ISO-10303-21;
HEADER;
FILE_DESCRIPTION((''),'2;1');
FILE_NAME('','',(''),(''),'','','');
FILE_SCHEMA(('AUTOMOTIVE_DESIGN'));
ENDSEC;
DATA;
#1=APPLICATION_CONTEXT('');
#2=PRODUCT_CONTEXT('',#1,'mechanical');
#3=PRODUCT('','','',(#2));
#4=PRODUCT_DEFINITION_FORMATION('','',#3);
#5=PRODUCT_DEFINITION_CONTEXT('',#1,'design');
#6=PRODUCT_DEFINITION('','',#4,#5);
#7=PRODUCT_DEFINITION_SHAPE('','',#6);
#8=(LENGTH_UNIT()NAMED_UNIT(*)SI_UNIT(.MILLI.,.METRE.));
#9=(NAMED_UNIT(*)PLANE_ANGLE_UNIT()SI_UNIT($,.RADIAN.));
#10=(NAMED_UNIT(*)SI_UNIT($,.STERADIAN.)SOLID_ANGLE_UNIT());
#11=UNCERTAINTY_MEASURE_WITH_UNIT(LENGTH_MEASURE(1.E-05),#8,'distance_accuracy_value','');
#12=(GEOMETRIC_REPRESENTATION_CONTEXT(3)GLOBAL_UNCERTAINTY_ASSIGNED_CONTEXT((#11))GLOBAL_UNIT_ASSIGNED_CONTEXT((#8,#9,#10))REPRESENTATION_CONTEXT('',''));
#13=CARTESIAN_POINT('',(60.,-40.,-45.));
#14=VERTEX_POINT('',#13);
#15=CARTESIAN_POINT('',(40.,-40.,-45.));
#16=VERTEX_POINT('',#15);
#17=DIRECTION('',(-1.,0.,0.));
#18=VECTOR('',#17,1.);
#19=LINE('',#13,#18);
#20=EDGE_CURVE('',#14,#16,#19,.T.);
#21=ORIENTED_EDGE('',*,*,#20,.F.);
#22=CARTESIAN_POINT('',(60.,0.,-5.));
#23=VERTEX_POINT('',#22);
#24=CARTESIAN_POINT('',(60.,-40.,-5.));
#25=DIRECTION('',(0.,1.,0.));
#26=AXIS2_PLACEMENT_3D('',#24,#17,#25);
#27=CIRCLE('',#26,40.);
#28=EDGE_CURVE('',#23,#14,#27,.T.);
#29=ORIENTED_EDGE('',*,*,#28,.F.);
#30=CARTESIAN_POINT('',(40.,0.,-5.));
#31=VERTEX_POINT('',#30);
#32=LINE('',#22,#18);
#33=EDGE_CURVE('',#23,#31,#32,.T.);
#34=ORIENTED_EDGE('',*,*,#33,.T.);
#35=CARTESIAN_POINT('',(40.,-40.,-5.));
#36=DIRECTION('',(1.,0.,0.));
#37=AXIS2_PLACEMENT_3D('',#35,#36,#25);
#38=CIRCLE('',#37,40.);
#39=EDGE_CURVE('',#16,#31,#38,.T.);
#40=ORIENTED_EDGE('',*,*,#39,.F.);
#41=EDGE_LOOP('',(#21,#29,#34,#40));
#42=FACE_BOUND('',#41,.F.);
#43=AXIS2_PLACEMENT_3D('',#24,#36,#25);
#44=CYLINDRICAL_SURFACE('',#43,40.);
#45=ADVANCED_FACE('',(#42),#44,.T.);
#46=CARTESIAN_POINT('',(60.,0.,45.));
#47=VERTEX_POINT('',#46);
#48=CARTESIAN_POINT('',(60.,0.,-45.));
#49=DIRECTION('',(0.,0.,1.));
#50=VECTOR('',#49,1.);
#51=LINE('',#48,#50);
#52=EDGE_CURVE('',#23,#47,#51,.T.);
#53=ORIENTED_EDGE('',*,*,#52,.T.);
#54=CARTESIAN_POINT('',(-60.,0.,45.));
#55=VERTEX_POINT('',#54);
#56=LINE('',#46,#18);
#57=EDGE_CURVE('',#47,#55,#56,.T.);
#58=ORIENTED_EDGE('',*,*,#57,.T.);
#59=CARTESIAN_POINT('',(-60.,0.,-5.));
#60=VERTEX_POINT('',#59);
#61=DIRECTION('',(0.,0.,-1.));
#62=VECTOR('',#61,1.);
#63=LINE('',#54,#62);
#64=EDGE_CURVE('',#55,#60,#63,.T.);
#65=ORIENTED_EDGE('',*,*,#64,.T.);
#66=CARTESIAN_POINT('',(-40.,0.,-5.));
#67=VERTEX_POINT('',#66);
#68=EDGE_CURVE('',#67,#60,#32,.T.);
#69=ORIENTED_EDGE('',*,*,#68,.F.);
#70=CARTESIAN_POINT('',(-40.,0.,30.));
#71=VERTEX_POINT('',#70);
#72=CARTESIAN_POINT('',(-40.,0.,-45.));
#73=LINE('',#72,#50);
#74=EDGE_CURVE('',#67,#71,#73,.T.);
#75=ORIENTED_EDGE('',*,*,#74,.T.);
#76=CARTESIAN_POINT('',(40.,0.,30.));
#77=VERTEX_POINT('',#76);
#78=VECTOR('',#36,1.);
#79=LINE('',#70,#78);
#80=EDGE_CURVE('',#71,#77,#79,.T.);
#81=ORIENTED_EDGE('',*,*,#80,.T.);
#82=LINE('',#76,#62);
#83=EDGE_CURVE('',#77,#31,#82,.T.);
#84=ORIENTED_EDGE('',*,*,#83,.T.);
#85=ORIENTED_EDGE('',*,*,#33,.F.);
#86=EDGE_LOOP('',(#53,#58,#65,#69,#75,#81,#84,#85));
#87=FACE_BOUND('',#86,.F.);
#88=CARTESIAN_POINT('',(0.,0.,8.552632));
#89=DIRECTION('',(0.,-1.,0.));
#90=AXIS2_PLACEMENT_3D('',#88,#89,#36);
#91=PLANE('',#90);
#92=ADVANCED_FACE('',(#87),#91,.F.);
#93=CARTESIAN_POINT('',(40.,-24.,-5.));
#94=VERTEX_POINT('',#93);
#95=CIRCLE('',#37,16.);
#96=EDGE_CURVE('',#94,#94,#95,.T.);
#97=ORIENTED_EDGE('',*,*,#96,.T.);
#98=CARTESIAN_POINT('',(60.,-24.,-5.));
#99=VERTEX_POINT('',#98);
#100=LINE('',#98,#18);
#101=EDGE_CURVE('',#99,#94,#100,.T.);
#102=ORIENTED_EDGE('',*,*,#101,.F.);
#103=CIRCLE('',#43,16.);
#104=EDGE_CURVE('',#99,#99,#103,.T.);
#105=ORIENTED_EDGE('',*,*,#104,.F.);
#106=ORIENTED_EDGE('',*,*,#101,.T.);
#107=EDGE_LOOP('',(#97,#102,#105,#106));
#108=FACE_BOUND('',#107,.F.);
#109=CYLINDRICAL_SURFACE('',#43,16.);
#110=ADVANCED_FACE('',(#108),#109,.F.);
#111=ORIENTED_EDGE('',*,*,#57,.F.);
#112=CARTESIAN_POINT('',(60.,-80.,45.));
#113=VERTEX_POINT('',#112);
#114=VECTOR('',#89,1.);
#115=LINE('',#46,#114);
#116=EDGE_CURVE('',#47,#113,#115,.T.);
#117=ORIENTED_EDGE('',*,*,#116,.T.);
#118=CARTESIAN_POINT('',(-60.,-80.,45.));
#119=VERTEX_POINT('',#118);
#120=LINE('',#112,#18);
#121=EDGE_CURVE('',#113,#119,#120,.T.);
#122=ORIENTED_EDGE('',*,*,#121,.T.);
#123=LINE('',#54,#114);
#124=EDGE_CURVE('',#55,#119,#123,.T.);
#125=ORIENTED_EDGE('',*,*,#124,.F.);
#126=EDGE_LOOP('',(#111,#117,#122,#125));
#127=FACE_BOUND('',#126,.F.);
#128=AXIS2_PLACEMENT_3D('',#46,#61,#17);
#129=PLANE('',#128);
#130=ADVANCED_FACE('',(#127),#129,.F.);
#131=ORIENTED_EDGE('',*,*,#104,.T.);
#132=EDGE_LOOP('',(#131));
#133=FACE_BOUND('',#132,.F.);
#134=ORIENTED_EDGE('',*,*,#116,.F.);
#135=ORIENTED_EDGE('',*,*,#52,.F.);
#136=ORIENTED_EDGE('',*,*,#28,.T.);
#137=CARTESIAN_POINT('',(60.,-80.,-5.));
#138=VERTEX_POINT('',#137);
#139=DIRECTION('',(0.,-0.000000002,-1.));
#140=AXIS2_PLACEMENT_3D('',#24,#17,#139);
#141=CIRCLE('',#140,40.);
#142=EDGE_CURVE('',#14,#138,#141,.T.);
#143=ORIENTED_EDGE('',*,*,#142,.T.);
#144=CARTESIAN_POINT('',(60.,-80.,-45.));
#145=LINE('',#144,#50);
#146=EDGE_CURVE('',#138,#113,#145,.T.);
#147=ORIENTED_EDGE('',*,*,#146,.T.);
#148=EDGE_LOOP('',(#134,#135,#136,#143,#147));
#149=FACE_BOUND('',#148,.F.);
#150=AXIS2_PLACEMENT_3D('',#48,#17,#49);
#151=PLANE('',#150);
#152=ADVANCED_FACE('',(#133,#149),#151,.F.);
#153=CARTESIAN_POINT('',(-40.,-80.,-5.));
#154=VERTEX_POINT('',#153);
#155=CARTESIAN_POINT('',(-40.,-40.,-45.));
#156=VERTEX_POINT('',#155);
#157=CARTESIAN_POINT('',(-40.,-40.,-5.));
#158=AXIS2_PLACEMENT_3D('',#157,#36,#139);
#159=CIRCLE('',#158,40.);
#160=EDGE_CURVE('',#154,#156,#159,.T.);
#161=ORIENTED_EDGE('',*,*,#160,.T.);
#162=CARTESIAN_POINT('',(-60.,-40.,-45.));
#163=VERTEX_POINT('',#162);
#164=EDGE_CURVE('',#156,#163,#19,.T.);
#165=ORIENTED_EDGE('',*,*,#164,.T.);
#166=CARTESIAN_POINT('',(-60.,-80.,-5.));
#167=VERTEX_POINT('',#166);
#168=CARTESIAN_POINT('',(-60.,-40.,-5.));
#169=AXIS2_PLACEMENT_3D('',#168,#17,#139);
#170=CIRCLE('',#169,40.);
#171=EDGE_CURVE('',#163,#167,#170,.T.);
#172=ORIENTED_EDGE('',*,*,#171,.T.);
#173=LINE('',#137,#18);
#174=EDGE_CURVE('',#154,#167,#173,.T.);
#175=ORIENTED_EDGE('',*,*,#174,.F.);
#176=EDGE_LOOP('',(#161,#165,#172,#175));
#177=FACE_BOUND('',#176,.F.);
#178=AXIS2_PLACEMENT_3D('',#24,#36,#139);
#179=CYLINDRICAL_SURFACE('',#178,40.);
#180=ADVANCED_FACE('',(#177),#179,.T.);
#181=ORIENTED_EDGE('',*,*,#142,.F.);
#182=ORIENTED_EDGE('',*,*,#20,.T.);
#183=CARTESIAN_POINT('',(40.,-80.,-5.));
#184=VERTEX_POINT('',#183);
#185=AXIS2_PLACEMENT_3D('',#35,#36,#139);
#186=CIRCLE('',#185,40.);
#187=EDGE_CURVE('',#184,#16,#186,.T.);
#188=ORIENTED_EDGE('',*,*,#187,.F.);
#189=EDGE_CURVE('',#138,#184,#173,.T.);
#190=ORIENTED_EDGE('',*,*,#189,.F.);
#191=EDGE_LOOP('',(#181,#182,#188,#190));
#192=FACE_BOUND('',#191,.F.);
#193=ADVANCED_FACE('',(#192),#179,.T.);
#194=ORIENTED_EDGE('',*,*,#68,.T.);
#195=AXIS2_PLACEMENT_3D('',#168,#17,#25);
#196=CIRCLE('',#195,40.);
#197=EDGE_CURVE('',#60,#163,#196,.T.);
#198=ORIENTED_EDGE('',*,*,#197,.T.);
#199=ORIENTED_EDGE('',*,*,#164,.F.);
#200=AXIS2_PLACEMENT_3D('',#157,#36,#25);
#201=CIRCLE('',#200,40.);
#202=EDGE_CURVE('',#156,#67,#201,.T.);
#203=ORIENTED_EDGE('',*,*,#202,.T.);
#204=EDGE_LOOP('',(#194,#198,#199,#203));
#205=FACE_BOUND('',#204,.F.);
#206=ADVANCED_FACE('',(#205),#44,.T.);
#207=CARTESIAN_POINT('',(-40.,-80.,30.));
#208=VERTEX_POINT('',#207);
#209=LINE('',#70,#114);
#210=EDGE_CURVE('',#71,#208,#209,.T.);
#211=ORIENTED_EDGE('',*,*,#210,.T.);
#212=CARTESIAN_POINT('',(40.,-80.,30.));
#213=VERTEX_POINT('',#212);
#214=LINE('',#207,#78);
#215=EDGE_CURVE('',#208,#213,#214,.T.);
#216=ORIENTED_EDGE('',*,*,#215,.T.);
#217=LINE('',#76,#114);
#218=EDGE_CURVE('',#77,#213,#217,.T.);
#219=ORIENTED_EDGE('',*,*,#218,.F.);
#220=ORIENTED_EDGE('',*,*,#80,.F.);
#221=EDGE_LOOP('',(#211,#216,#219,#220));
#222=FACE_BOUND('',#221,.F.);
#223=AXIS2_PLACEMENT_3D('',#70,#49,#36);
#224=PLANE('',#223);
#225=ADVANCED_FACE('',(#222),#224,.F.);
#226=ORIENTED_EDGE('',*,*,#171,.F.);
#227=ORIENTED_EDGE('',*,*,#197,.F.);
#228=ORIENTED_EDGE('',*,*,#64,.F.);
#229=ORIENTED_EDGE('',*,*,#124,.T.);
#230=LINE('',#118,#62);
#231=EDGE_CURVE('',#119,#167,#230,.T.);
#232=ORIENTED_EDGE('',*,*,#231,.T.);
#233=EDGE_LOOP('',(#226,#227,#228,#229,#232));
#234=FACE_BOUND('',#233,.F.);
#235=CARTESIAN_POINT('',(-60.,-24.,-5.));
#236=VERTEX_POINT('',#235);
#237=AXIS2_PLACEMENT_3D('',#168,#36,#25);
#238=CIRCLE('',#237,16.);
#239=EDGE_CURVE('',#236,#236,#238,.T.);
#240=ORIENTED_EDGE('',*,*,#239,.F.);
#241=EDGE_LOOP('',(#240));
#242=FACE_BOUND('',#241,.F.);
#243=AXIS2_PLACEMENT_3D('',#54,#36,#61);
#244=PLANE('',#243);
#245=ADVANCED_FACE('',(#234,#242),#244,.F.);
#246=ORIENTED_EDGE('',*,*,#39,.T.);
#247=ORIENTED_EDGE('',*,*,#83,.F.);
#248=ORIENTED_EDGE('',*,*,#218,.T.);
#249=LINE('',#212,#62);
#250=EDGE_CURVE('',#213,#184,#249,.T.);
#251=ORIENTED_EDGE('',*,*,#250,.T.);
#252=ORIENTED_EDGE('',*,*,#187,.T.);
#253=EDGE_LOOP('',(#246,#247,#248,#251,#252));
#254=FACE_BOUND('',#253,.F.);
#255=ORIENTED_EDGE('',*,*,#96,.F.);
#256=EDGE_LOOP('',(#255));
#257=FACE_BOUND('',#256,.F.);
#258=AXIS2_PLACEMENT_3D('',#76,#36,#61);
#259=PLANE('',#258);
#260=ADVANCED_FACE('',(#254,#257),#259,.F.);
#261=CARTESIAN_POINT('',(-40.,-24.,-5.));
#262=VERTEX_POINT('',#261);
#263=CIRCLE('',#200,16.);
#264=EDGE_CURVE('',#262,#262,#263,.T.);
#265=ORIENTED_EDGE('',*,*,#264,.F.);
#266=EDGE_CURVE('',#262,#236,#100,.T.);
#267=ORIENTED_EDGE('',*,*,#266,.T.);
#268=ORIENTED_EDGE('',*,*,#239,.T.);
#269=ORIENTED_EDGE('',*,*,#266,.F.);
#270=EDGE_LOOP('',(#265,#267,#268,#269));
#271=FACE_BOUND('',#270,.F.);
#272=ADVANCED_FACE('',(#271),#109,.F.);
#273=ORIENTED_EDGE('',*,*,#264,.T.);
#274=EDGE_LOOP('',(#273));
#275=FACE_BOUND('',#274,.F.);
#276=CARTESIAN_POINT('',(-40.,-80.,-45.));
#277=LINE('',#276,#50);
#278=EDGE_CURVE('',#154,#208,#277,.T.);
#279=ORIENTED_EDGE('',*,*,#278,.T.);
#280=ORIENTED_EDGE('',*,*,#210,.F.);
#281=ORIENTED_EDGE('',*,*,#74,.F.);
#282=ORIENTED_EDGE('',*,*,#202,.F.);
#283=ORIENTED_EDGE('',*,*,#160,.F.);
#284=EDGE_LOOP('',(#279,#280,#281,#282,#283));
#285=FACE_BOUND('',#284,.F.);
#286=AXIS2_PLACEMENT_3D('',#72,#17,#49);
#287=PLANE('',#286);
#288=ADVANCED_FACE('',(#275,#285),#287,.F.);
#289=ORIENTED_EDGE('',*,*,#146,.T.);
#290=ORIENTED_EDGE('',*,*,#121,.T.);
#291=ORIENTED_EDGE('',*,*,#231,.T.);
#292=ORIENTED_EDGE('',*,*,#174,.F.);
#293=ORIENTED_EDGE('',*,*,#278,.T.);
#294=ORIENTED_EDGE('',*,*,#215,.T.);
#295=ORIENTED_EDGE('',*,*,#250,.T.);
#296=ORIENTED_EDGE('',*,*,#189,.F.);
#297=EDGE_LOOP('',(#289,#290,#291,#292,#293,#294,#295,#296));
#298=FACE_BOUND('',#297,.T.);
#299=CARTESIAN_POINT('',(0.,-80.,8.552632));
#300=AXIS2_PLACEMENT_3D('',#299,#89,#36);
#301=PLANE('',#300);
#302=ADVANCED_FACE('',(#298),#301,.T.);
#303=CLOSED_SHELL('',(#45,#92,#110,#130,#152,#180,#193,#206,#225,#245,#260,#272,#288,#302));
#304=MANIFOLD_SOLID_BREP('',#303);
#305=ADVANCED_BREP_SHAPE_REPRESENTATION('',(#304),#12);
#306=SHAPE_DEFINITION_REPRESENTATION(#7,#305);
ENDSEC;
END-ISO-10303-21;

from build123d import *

# Parameters (mm, degrees)
F1_DEPTH = 80
F2_R     = 16
F3_DEPTH = 120


# Not quite as in the source:
# - the program builds the solid bodies; features that only make, move or delete a surface that nothing else refers to are left out


with BuildPart() as f1:
    # F0 (on Front) → F1 (new body)
    with BuildSketch(Plane.XZ):
        Polygon((60, -45), (60, 45), (-60, 45), (-60, -45), (-40, -45), (-40, 30), (40, 30), (40, -45), align=None)
    extrude(amount=F1_DEPTH)

    # F2 (on face) → F3 (cut)
    with BuildSketch(Plane.YZ.offset(60)):
        with BuildLine():
            ThreePointArc((-40.0000000863, -45), (-68.284271278, -33.2842712169), (-80, -5))
            Line((-80, -5), (-80, -45))
            Line((-80, -45), (-40.0000000863, -45))
        make_face()
        with BuildLine():
            Line((0, -45), (0, -5))
            ThreePointArc((0, -5), (-11.7157287831, -33.284271278), (-40.0000000863, -45))
            Line((-40.0000000863, -45), (0, -45))
        make_face()
        with Locations((-40, -5)):
            Circle(F2_R)
    extrude(amount=-F3_DEPTH, mode=Mode.SUBTRACT)


solid = f1.part
